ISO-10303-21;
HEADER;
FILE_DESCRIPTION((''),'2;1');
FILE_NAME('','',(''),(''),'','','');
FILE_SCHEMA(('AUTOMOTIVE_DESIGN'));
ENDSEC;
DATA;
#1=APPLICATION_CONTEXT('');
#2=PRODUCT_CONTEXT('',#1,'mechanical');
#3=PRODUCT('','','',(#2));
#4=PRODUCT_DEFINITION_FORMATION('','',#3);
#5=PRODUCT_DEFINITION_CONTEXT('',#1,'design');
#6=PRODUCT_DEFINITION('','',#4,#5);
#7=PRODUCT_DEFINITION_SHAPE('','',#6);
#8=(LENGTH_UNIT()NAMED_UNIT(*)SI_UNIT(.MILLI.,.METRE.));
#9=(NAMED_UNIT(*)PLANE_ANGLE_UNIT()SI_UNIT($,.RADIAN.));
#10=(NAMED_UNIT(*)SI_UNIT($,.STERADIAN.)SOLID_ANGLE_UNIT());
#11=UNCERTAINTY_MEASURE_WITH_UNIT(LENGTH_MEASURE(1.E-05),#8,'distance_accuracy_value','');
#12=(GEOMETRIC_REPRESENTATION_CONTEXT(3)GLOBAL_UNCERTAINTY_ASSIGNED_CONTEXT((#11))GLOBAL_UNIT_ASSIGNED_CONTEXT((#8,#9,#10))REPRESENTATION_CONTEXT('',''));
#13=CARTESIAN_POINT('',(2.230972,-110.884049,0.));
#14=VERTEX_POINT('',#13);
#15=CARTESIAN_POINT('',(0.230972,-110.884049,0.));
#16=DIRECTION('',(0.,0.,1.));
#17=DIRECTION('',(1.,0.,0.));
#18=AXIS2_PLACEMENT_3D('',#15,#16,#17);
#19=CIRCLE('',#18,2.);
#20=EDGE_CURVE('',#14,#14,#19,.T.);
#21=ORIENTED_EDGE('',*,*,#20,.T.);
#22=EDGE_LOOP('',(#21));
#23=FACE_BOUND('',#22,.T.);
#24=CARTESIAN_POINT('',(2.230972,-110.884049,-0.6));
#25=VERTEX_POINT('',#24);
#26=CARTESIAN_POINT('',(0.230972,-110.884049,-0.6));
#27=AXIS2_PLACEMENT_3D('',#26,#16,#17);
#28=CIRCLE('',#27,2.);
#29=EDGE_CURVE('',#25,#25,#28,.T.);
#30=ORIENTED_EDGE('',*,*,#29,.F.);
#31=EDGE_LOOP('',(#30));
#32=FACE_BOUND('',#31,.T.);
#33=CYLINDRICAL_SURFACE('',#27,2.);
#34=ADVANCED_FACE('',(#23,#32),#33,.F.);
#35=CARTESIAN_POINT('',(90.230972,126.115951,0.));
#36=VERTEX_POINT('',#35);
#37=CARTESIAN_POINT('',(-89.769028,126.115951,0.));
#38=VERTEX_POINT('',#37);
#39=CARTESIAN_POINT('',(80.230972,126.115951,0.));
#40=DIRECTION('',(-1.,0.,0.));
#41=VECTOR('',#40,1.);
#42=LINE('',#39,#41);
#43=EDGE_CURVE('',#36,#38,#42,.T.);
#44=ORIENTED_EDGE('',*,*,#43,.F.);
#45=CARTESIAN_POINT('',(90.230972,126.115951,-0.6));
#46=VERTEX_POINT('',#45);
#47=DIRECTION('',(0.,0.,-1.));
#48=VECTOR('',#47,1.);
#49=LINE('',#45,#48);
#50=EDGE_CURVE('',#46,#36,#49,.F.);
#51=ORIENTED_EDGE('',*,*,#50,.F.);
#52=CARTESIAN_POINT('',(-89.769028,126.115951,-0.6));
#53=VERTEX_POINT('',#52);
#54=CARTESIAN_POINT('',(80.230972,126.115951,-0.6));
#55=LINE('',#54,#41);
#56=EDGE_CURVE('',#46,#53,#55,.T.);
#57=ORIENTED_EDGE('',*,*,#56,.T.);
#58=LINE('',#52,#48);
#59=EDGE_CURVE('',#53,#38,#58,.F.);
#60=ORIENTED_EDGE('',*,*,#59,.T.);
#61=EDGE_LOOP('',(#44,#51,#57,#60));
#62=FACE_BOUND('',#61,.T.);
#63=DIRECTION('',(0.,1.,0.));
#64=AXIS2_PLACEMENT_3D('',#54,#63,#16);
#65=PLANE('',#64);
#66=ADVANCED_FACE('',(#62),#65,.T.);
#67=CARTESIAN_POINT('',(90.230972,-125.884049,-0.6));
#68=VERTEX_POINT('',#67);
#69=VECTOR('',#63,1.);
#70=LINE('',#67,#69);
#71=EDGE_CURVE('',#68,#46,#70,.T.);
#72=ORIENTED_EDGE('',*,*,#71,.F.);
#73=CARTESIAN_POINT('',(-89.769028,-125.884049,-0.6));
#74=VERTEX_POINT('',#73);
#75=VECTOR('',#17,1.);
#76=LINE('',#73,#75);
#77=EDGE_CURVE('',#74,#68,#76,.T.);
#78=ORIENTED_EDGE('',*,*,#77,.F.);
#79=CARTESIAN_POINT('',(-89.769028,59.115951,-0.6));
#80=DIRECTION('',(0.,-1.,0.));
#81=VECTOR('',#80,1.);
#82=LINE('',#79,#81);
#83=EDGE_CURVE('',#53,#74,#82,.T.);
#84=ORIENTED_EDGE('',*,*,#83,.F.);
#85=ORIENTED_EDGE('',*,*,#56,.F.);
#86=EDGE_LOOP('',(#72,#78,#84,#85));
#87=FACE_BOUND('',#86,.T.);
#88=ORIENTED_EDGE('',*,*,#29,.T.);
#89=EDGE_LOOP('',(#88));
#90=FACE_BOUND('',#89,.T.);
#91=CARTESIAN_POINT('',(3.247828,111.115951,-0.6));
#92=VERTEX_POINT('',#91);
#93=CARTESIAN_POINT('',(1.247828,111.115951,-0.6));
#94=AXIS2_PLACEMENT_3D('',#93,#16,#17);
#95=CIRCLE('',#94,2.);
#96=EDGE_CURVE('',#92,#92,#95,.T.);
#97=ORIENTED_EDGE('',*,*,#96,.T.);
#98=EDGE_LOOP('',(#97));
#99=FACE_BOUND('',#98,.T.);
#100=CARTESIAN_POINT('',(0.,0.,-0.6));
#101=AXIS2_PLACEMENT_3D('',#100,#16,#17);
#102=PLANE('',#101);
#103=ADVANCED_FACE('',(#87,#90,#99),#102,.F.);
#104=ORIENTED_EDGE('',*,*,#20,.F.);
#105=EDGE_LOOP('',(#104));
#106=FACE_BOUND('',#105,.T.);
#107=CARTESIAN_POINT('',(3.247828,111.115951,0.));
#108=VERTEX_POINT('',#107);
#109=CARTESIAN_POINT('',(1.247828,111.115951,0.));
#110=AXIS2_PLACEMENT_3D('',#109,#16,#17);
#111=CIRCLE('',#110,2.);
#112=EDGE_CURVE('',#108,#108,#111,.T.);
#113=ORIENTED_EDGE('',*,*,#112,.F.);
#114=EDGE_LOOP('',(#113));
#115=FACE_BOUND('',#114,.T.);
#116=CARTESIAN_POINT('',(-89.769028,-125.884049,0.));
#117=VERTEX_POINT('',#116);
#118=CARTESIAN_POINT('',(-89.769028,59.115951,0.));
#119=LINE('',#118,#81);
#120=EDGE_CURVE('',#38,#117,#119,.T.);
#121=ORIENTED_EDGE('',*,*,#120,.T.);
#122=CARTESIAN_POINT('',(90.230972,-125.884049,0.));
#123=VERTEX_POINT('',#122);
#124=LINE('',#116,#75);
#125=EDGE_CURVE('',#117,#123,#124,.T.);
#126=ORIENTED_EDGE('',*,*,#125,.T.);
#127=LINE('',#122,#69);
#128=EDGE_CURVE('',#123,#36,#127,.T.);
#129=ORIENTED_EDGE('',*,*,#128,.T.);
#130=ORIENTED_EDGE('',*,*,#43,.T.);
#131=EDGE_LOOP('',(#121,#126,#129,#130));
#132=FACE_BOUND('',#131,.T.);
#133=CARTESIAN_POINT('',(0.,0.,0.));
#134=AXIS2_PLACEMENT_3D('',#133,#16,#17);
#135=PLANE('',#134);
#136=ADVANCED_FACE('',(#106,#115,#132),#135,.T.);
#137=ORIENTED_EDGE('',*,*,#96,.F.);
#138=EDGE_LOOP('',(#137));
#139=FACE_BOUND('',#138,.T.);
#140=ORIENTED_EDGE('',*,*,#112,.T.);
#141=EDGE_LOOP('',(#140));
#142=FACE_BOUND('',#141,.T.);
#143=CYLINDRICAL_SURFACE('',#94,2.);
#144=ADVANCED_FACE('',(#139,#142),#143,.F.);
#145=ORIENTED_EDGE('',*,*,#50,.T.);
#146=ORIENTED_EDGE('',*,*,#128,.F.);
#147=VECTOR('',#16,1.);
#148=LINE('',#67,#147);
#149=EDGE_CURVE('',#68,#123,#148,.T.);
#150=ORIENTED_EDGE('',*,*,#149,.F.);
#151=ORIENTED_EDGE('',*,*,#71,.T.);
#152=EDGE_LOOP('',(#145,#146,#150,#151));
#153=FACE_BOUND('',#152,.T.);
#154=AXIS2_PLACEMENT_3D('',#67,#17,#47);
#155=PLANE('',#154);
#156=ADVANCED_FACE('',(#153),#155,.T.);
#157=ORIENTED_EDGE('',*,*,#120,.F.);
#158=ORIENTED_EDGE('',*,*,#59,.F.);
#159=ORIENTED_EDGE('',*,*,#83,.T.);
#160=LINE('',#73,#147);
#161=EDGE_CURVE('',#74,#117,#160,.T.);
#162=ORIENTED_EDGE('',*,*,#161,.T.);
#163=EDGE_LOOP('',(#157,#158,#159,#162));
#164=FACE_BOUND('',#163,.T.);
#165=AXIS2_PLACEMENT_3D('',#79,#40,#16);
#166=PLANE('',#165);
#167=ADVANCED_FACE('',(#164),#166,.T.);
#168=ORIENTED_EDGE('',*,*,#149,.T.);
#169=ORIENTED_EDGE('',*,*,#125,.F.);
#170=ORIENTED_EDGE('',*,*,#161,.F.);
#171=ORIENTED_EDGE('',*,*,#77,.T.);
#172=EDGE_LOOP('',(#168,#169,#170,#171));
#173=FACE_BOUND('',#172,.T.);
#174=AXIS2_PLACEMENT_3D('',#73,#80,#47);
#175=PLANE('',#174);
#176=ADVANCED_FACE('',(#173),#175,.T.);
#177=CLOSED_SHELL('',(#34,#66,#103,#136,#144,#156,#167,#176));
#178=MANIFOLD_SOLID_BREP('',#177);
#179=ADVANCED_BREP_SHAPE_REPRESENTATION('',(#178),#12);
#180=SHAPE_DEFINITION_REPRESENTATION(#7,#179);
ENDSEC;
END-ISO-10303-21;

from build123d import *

# Parameters (mm, degrees)
SKETCH1_R             = 2
BASE_FLANGE1_DEPTH    = 0.6
DELETEFACE1_START     = -0.6
DELETEFACE1_OUTLINE_W = 10
DELETEFACE1_OUTLINE_H = 67
DELETEFACE1_DEPTH     = 0.6


with BuildPart() as part:
    # Base-Flange1: sheet metal written as solids
    # Sketch1 → Base-Flange1 (new body)
    with BuildSketch(Plane.XY):
        Polygon((80.230971718, 126.115950591), (-79.769028282, 126.115950591), (-79.769028282, 59.115950591), (-89.769028282, 59.115950591), (-89.769028282, -125.884049409), (90.230971718, -125.884049409), (90.230971718, 59.115950591), (80.230971718, 59.115950591), align=None)
        with Locations((1.24782761, 111.115950591)):
            Circle(SKETCH1_R, mode=Mode.SUBTRACT)
        with Locations((0.230971718, -110.884049409)):
            Circle(SKETCH1_R, mode=Mode.SUBTRACT)
    extrude(amount=-BASE_FLANGE1_DEPTH)

    # DeleteFace1: read off the stored shape, not the designer's step
    # DeleteFace1 outline → DeleteFace1 (add)
    with BuildSketch(Plane.XY.offset(DELETEFACE1_START)):
        with Locations((85.230971718, 92.615950591)):
            Rectangle(DELETEFACE1_OUTLINE_W, DELETEFACE1_OUTLINE_H)
        with Locations((-84.769028282, 92.615950591)):
            Rectangle(DELETEFACE1_OUTLINE_W, DELETEFACE1_OUTLINE_H)
    extrude(amount=DELETEFACE1_DEPTH)


solid = part.part
